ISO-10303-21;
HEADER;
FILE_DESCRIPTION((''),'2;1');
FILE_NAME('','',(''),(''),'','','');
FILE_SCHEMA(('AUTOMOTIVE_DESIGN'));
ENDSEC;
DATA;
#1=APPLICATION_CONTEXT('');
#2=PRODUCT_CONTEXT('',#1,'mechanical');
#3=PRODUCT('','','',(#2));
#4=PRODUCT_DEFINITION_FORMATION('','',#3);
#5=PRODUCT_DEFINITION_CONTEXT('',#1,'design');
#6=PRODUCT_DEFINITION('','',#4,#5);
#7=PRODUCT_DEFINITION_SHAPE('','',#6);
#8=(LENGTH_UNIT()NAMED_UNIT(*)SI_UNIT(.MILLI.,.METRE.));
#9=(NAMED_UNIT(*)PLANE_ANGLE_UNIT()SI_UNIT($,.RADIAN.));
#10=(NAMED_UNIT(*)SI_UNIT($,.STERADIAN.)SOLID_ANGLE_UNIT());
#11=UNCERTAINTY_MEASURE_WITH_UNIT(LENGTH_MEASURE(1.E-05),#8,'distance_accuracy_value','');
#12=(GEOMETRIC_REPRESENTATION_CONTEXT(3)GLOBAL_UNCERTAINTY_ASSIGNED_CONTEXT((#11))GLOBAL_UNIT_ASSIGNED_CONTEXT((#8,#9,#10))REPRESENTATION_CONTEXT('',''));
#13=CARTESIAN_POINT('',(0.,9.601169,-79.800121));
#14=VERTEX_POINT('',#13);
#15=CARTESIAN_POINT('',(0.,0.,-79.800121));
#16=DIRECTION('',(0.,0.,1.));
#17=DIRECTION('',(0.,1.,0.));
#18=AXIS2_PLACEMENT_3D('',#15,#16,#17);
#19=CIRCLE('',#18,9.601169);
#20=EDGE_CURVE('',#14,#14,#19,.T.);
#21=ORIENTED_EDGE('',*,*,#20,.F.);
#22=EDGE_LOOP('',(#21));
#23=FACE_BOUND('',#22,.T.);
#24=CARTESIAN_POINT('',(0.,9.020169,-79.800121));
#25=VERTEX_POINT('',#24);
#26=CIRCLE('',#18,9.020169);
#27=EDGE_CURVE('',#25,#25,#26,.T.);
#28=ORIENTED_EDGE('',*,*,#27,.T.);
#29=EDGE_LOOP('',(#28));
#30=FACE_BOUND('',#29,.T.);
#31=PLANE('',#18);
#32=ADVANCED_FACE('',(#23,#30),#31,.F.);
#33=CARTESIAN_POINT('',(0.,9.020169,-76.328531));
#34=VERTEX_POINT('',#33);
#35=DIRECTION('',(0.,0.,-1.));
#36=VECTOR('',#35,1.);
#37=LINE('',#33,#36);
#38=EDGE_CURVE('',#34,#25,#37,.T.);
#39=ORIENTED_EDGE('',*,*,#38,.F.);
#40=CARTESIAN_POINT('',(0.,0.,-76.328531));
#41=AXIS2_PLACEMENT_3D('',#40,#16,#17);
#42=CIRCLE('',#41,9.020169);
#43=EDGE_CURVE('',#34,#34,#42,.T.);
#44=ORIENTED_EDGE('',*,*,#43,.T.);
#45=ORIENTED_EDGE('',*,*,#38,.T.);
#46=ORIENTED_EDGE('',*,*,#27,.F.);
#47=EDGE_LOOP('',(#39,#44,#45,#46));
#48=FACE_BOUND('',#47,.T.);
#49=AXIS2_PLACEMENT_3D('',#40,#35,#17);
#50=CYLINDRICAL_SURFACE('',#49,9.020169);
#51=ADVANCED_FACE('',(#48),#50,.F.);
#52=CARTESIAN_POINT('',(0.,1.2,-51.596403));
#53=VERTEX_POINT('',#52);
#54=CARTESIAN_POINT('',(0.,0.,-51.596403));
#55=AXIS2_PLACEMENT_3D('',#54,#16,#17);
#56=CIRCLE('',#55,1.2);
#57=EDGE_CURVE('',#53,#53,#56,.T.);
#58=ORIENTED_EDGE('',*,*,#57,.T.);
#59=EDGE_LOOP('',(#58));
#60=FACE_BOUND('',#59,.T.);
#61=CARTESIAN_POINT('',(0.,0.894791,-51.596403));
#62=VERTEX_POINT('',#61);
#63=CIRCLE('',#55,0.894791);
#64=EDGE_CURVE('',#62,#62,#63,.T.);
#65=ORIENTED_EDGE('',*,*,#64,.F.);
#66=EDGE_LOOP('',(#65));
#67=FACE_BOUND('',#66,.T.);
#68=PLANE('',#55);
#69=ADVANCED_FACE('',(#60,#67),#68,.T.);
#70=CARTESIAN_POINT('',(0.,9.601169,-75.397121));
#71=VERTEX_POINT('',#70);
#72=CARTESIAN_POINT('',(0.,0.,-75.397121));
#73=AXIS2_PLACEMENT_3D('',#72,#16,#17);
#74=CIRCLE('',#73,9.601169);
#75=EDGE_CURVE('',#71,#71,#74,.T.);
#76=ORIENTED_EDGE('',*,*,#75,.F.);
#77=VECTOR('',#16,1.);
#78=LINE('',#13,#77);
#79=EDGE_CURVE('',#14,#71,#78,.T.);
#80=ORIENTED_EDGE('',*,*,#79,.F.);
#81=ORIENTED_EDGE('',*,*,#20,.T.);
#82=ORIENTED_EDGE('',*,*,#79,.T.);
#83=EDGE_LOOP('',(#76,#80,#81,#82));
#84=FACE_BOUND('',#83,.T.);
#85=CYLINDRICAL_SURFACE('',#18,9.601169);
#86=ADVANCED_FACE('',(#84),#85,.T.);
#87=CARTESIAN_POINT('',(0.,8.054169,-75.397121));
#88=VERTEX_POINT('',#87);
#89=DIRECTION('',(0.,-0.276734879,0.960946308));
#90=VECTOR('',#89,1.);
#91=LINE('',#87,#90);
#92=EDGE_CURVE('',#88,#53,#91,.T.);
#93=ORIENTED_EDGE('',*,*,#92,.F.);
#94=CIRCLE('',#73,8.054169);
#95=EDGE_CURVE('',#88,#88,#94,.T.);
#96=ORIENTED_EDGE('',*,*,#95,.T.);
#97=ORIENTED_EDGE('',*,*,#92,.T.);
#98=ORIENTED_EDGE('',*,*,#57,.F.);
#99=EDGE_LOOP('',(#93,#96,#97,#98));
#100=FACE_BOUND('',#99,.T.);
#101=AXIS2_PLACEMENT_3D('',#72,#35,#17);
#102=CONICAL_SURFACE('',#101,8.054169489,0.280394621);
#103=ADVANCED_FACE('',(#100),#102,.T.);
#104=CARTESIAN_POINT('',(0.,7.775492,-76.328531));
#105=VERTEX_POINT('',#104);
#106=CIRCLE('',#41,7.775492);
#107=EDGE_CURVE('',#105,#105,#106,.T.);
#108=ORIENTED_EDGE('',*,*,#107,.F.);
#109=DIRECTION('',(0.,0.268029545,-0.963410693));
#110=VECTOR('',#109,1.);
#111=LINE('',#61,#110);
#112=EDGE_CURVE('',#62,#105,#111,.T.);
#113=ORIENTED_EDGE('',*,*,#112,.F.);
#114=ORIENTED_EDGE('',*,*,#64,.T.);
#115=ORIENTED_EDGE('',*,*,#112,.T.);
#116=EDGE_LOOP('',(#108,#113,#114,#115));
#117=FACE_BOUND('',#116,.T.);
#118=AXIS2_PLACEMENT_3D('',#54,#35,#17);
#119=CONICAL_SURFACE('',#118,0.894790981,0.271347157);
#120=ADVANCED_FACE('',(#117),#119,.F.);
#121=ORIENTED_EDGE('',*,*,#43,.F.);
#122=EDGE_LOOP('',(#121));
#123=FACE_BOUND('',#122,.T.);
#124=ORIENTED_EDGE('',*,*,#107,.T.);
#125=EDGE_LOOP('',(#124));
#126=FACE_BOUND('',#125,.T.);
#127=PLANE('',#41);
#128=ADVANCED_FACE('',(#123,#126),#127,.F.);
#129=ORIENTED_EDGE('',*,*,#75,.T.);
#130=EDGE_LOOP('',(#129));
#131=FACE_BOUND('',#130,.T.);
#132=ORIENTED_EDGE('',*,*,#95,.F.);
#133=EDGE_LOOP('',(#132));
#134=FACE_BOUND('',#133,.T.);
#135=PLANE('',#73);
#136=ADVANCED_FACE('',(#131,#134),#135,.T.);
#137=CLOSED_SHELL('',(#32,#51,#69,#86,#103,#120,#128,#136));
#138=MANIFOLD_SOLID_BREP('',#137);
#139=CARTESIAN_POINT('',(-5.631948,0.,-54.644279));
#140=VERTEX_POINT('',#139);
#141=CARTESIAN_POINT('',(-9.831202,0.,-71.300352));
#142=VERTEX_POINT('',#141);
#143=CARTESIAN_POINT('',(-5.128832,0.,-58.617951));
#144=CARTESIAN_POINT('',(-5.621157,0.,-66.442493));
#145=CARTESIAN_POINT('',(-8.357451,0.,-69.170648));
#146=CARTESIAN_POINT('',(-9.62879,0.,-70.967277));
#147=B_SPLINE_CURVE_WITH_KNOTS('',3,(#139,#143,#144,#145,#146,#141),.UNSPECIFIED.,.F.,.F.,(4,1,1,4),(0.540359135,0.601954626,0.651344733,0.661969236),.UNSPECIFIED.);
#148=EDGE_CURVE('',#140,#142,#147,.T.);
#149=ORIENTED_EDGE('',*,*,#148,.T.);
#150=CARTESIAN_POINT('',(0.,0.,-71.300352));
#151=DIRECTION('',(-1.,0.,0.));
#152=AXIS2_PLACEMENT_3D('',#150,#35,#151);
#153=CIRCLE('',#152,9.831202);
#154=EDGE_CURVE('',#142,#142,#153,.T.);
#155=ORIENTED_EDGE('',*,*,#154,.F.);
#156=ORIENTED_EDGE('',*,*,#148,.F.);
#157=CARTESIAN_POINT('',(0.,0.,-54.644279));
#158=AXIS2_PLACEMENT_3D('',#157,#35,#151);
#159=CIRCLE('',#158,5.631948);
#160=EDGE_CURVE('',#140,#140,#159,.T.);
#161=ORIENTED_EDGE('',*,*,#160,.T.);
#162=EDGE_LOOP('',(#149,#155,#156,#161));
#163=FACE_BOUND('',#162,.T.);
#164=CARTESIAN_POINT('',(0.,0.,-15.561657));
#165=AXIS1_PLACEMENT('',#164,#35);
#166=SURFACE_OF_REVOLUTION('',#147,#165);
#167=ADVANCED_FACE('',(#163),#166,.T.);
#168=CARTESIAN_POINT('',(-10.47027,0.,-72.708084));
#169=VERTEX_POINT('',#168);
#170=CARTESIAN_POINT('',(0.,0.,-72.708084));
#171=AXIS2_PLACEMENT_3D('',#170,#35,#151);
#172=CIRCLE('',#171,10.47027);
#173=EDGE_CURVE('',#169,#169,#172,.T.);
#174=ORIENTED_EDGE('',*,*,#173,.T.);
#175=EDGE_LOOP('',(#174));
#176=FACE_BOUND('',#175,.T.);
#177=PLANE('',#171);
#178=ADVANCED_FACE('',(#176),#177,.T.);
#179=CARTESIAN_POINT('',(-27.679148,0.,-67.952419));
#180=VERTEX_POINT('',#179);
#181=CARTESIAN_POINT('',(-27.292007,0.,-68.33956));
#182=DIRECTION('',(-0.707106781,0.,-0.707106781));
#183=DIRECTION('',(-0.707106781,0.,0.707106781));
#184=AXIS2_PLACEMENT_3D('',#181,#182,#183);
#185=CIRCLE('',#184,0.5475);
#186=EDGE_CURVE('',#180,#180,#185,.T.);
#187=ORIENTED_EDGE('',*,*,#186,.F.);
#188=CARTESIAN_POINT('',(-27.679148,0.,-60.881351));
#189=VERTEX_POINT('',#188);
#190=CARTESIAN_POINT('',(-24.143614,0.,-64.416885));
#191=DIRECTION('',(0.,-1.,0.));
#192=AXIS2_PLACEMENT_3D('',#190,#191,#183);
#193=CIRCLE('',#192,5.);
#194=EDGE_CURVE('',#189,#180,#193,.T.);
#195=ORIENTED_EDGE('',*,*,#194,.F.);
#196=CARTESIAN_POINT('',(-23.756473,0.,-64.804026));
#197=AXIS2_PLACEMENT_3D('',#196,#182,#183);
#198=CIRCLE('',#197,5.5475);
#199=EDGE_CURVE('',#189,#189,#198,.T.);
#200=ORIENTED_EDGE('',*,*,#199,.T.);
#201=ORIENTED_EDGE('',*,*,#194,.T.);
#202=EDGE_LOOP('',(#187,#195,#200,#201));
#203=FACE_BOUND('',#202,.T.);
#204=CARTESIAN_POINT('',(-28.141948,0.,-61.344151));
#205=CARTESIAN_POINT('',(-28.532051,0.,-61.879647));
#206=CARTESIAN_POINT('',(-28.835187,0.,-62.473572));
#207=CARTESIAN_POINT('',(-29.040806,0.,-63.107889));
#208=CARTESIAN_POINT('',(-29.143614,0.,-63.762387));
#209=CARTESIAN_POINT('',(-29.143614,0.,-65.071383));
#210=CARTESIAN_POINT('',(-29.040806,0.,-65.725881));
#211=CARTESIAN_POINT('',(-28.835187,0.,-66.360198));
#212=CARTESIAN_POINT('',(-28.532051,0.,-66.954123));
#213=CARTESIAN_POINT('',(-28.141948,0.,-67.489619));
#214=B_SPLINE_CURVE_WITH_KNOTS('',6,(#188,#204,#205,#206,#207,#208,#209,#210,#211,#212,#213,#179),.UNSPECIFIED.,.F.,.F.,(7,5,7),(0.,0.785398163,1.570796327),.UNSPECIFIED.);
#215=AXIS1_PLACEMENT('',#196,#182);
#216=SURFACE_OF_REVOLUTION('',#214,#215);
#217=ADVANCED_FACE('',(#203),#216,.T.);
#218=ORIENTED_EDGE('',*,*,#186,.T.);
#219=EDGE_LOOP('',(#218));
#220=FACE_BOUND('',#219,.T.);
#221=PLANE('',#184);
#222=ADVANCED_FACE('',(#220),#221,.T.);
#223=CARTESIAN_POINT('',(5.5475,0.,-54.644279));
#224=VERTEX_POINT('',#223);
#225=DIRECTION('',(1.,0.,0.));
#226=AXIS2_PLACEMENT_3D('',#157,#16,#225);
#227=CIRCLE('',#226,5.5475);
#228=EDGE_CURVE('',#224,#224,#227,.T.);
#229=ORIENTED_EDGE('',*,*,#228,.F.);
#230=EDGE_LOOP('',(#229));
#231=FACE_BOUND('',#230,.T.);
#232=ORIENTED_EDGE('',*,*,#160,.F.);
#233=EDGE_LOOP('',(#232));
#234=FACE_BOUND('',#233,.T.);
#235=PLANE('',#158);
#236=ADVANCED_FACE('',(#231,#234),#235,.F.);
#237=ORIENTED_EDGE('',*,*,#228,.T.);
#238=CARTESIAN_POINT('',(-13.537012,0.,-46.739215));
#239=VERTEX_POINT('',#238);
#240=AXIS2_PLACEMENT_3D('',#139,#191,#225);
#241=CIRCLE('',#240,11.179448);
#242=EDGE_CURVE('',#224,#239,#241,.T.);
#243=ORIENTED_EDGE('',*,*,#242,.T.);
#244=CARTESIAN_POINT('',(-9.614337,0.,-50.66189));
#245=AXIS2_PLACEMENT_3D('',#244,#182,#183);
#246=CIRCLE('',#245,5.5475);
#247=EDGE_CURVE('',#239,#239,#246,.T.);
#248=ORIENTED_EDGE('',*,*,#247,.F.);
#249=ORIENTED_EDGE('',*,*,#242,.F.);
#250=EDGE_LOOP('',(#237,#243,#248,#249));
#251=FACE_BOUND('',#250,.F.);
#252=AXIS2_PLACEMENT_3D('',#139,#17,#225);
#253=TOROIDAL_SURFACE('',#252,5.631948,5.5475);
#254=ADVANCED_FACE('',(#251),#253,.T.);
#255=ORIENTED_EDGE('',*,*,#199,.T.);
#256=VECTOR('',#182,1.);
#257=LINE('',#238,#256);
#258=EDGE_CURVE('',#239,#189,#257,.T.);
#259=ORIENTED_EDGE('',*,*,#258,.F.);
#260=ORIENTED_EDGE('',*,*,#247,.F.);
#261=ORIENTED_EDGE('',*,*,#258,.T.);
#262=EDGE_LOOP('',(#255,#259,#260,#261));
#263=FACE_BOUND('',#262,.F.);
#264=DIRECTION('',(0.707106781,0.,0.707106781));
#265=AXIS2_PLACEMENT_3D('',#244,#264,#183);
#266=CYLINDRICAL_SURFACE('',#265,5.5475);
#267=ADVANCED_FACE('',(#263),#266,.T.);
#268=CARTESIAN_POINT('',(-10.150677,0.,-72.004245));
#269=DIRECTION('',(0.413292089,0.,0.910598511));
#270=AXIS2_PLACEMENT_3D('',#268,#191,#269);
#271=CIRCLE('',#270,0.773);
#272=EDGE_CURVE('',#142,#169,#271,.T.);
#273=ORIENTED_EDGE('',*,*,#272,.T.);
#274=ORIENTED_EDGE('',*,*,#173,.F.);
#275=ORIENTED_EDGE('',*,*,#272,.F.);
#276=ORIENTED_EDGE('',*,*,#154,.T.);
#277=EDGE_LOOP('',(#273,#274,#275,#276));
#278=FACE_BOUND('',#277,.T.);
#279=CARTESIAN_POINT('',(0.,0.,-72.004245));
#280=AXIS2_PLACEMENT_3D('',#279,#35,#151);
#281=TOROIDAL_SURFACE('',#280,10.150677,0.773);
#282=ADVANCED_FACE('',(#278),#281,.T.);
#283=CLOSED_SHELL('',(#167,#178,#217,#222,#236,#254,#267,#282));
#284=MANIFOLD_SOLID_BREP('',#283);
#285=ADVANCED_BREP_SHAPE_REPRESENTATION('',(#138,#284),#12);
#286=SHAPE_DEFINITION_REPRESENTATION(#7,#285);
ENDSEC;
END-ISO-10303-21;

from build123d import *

# Parameters (mm, degrees)
F5_R     = 5.5475
F6_ANGLE = 135
F7_DEPTH = 25
F8_R     = 5


with BuildPart() as f1:
    # F0 (on Front) → F1 (revolve)
    with BuildSketch(Plane.XZ):
        with BuildLine():
            Line((0, -72.7080839413), (0, -54.644279182))
            Line((0, -54.644279182), (-5.6319482939, -54.644279182))
            add(Edge.make_bspline(
                [(-5.6319482939, -54.644279182), (-5.1288321088, -58.6179507974), (-5.6211565128, -66.4424929302), (-8.3574508563, -69.170647696), (-9.6287897185, -70.9672772938), (-9.8312023567, -71.3003521886)],
                knots=[0.5403591349, 0.5403591349, 0.5403591349, 0.5403591349, 0.6019546263, 0.6513447325, 0.6619692363, 0.6619692363, 0.6619692363, 0.6619692363], degree=3))
            add(Edge.make_bspline(
                [(-9.8312023567, -71.3003521886), (-10.0998646212, -71.7424424467), (-10.3286150665, -72.2109833189), (-10.4702698771, -72.7080839413)],
                knots=[0.6619692363, 0.6619692363, 0.6619692363, 0.6619692363, 0.6760711386, 0.6760711386, 0.6760711386, 0.6760711386], degree=3))
            Line((-10.4702698771, -72.7080839413), (0, -72.7080839413))
        make_face()
        with BuildLine():
            add(Edge.make_bspline(
                [(-9.8312023567, -71.3003521886), (-10.0998646212, -71.7424424467), (-10.3286150665, -72.2109833189), (-10.4702698771, -72.7080839413)],
                knots=[0.6619692363, 0.6619692363, 0.6619692363, 0.6619692363, 0.6760711386, 0.6760711386, 0.6760711386, 0.6760711386], degree=3))
            ThreePointArc((-9.8312023567, -71.3003521886), (-10.8545430206, -71.6847110766), (-10.4702698771, -72.7080839413))
        make_face()
    revolve(axis=Axis((0, 0, -15.5616570242), (0, 0, -1)))

    # F5 (on face) → F6 (revolve)
    with BuildSketch(Plane.XY.offset(-54.644279182)):
        Circle(F5_R)
    revolve(axis=Axis((-5.6319482939, 2.586, -54.644279182), (0, -1, 0)), revolution_arc=F6_ANGLE)

    # F7 (add): a face of the model
    f7_faces = [f1.faces().sort_by_distance(p)[0] for p in [
        (-9.6143371239, 0, -50.661890352),
    ]]
    extrude(f7_faces, amount=F7_DEPTH)

    # F8
    f8_edges = [f1.edges().sort_by_distance(p)[0] for p in [
        (-23.369332, 0, -72.262235),
    ]]
    fillet(f8_edges, radius=F8_R)


with BuildPart() as f4:
    # F3 (on Right) → F4 (revolve)
    with BuildSketch(Plane.YZ):
        Polygon((1.2, -51.5964031219), (0.894790981, -51.5964031219), (7.7754920349, -76.3285309076), (9.0201694891, -76.3285309076), (9.0201694891, -79.8001212753), (9.6011694891, -79.8001212753), (9.6011694891, -75.3971212753), (8.0541694891, -75.3971212753), align=None)
    revolve(axis=Axis((0, 0, -65.6982621986), (0, 0, 1)))


solid = Compound([f1.part, f4.part])
